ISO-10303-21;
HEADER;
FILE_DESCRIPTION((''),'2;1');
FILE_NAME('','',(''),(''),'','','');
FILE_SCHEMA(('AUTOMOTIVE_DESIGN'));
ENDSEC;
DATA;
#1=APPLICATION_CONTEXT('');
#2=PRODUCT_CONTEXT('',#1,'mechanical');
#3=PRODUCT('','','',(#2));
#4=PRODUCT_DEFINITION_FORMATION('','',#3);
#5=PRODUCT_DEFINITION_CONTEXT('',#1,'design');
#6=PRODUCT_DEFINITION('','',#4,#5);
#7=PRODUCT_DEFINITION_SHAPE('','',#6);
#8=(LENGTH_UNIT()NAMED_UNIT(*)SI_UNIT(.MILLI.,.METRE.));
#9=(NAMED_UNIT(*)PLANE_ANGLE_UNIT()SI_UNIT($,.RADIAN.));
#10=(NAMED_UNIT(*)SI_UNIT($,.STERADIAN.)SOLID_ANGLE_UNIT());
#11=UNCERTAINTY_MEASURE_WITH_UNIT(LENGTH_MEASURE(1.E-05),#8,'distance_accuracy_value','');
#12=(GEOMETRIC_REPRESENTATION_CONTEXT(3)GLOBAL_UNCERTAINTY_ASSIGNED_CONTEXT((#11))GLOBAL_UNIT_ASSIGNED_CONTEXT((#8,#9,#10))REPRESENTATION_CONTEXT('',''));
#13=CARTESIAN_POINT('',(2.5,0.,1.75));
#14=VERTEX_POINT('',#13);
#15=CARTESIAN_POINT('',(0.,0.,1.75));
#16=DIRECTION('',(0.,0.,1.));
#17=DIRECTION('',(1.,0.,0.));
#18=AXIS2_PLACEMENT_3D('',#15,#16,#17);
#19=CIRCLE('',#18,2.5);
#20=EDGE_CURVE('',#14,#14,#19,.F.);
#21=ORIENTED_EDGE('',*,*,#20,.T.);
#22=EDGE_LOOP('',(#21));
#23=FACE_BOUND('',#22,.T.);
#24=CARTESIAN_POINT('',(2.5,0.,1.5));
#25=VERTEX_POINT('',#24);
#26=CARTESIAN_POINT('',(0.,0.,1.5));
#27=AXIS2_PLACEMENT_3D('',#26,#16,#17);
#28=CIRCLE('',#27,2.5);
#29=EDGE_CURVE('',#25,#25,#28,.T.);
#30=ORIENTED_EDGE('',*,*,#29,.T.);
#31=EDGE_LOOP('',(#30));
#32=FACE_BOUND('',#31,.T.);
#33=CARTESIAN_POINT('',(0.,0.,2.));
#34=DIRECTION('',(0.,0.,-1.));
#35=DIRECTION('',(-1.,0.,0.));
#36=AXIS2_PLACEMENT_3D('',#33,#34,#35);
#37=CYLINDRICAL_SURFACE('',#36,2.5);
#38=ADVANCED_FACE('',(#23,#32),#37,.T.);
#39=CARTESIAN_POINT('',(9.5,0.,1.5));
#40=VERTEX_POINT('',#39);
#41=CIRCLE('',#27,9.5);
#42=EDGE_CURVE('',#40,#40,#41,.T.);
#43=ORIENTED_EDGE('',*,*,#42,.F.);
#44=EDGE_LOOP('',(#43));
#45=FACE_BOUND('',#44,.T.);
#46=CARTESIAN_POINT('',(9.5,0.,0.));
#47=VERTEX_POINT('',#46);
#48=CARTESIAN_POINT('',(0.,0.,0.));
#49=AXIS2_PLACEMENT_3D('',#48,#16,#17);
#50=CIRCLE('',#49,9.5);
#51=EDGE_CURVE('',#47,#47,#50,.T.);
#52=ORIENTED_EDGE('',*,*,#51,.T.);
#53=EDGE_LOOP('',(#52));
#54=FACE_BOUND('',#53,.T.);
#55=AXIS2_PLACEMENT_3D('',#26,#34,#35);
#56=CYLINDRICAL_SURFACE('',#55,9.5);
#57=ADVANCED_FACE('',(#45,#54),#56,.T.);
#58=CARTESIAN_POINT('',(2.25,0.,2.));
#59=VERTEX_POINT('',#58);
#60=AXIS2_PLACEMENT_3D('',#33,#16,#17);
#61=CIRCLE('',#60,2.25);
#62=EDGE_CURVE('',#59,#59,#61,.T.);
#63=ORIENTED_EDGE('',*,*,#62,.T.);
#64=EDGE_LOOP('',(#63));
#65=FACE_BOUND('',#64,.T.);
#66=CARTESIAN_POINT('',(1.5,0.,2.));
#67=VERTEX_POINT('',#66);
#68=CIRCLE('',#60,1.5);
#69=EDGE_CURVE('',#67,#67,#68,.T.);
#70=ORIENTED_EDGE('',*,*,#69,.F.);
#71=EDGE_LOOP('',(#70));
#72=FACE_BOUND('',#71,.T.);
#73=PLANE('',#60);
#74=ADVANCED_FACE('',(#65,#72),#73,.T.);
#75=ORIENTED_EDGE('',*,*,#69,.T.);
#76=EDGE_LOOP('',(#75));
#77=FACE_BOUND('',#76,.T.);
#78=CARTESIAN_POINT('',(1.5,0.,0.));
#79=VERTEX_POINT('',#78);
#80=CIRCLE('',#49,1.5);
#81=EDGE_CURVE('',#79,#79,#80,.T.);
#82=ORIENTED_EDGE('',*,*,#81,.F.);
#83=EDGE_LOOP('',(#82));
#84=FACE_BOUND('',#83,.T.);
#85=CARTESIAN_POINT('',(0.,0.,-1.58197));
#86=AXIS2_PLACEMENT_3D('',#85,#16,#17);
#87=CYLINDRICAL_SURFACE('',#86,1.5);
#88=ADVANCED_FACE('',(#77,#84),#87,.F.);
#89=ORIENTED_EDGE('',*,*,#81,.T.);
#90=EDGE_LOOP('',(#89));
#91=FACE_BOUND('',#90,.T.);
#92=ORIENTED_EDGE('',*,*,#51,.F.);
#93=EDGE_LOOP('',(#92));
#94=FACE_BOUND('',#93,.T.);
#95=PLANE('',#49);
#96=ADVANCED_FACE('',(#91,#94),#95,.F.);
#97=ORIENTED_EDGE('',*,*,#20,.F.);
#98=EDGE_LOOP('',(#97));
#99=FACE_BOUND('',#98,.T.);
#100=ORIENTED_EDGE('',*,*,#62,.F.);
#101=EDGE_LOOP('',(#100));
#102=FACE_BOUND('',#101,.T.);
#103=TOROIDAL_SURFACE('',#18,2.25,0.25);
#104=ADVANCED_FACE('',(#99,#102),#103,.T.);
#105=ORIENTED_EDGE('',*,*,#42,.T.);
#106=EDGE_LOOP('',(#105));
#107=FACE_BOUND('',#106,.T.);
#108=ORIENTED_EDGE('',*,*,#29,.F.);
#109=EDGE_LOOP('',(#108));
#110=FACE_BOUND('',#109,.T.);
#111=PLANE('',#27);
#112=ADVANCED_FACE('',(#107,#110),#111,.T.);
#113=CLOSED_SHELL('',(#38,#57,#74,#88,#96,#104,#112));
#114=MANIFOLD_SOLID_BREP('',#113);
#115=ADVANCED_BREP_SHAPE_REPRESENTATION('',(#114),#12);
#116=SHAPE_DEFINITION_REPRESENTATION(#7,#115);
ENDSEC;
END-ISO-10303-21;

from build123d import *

# Parameters (mm, degrees)
SKETCH2_R          = 19
EXTRUDE1_DEPTH     = 3
SKETCH3_R          = 5
EXTRUDE3_DEPTH     = 1
EXTRUDE4_START     = -4
EXTRUDE4_OUTLINE_R = 3
EXTRUDE4_DEPTH     = 4
FILLET1_R          = 0.5
SCALE1_SCALE       = 0.5


# Read off the part's stored shape, not the designer's step: Extrude4
with BuildPart() as part:
    # Sketch2 → Extrude1 (new body)
    with BuildSketch(Plane.XY):
        Circle(SKETCH2_R)
    extrude(amount=EXTRUDE1_DEPTH)

    # Sketch3 → Extrude3 (add)
    with BuildSketch(Plane.XY.offset(3)):
        Circle(SKETCH3_R)
    extrude(amount=EXTRUDE3_DEPTH)

    # Extrude4 outline → Extrude4 (cut)
    with BuildSketch(Plane.XY.offset(4).offset(EXTRUDE4_START)):
        Circle(EXTRUDE4_OUTLINE_R)
    extrude(amount=EXTRUDE4_DEPTH, mode=Mode.SUBTRACT)

    # Fillet1
    fillet1_edges = [part.edges().sort_by_distance(p)[0] for p in [
        (-5, 0, 4),
    ]]
    fillet(fillet1_edges, radius=FILLET1_R)


with BuildPart() as part_1:
    # Scale1: scaled about (0, 0, 0)
    add(part.part.scale(SCALE1_SCALE))


solid = part_1.part
